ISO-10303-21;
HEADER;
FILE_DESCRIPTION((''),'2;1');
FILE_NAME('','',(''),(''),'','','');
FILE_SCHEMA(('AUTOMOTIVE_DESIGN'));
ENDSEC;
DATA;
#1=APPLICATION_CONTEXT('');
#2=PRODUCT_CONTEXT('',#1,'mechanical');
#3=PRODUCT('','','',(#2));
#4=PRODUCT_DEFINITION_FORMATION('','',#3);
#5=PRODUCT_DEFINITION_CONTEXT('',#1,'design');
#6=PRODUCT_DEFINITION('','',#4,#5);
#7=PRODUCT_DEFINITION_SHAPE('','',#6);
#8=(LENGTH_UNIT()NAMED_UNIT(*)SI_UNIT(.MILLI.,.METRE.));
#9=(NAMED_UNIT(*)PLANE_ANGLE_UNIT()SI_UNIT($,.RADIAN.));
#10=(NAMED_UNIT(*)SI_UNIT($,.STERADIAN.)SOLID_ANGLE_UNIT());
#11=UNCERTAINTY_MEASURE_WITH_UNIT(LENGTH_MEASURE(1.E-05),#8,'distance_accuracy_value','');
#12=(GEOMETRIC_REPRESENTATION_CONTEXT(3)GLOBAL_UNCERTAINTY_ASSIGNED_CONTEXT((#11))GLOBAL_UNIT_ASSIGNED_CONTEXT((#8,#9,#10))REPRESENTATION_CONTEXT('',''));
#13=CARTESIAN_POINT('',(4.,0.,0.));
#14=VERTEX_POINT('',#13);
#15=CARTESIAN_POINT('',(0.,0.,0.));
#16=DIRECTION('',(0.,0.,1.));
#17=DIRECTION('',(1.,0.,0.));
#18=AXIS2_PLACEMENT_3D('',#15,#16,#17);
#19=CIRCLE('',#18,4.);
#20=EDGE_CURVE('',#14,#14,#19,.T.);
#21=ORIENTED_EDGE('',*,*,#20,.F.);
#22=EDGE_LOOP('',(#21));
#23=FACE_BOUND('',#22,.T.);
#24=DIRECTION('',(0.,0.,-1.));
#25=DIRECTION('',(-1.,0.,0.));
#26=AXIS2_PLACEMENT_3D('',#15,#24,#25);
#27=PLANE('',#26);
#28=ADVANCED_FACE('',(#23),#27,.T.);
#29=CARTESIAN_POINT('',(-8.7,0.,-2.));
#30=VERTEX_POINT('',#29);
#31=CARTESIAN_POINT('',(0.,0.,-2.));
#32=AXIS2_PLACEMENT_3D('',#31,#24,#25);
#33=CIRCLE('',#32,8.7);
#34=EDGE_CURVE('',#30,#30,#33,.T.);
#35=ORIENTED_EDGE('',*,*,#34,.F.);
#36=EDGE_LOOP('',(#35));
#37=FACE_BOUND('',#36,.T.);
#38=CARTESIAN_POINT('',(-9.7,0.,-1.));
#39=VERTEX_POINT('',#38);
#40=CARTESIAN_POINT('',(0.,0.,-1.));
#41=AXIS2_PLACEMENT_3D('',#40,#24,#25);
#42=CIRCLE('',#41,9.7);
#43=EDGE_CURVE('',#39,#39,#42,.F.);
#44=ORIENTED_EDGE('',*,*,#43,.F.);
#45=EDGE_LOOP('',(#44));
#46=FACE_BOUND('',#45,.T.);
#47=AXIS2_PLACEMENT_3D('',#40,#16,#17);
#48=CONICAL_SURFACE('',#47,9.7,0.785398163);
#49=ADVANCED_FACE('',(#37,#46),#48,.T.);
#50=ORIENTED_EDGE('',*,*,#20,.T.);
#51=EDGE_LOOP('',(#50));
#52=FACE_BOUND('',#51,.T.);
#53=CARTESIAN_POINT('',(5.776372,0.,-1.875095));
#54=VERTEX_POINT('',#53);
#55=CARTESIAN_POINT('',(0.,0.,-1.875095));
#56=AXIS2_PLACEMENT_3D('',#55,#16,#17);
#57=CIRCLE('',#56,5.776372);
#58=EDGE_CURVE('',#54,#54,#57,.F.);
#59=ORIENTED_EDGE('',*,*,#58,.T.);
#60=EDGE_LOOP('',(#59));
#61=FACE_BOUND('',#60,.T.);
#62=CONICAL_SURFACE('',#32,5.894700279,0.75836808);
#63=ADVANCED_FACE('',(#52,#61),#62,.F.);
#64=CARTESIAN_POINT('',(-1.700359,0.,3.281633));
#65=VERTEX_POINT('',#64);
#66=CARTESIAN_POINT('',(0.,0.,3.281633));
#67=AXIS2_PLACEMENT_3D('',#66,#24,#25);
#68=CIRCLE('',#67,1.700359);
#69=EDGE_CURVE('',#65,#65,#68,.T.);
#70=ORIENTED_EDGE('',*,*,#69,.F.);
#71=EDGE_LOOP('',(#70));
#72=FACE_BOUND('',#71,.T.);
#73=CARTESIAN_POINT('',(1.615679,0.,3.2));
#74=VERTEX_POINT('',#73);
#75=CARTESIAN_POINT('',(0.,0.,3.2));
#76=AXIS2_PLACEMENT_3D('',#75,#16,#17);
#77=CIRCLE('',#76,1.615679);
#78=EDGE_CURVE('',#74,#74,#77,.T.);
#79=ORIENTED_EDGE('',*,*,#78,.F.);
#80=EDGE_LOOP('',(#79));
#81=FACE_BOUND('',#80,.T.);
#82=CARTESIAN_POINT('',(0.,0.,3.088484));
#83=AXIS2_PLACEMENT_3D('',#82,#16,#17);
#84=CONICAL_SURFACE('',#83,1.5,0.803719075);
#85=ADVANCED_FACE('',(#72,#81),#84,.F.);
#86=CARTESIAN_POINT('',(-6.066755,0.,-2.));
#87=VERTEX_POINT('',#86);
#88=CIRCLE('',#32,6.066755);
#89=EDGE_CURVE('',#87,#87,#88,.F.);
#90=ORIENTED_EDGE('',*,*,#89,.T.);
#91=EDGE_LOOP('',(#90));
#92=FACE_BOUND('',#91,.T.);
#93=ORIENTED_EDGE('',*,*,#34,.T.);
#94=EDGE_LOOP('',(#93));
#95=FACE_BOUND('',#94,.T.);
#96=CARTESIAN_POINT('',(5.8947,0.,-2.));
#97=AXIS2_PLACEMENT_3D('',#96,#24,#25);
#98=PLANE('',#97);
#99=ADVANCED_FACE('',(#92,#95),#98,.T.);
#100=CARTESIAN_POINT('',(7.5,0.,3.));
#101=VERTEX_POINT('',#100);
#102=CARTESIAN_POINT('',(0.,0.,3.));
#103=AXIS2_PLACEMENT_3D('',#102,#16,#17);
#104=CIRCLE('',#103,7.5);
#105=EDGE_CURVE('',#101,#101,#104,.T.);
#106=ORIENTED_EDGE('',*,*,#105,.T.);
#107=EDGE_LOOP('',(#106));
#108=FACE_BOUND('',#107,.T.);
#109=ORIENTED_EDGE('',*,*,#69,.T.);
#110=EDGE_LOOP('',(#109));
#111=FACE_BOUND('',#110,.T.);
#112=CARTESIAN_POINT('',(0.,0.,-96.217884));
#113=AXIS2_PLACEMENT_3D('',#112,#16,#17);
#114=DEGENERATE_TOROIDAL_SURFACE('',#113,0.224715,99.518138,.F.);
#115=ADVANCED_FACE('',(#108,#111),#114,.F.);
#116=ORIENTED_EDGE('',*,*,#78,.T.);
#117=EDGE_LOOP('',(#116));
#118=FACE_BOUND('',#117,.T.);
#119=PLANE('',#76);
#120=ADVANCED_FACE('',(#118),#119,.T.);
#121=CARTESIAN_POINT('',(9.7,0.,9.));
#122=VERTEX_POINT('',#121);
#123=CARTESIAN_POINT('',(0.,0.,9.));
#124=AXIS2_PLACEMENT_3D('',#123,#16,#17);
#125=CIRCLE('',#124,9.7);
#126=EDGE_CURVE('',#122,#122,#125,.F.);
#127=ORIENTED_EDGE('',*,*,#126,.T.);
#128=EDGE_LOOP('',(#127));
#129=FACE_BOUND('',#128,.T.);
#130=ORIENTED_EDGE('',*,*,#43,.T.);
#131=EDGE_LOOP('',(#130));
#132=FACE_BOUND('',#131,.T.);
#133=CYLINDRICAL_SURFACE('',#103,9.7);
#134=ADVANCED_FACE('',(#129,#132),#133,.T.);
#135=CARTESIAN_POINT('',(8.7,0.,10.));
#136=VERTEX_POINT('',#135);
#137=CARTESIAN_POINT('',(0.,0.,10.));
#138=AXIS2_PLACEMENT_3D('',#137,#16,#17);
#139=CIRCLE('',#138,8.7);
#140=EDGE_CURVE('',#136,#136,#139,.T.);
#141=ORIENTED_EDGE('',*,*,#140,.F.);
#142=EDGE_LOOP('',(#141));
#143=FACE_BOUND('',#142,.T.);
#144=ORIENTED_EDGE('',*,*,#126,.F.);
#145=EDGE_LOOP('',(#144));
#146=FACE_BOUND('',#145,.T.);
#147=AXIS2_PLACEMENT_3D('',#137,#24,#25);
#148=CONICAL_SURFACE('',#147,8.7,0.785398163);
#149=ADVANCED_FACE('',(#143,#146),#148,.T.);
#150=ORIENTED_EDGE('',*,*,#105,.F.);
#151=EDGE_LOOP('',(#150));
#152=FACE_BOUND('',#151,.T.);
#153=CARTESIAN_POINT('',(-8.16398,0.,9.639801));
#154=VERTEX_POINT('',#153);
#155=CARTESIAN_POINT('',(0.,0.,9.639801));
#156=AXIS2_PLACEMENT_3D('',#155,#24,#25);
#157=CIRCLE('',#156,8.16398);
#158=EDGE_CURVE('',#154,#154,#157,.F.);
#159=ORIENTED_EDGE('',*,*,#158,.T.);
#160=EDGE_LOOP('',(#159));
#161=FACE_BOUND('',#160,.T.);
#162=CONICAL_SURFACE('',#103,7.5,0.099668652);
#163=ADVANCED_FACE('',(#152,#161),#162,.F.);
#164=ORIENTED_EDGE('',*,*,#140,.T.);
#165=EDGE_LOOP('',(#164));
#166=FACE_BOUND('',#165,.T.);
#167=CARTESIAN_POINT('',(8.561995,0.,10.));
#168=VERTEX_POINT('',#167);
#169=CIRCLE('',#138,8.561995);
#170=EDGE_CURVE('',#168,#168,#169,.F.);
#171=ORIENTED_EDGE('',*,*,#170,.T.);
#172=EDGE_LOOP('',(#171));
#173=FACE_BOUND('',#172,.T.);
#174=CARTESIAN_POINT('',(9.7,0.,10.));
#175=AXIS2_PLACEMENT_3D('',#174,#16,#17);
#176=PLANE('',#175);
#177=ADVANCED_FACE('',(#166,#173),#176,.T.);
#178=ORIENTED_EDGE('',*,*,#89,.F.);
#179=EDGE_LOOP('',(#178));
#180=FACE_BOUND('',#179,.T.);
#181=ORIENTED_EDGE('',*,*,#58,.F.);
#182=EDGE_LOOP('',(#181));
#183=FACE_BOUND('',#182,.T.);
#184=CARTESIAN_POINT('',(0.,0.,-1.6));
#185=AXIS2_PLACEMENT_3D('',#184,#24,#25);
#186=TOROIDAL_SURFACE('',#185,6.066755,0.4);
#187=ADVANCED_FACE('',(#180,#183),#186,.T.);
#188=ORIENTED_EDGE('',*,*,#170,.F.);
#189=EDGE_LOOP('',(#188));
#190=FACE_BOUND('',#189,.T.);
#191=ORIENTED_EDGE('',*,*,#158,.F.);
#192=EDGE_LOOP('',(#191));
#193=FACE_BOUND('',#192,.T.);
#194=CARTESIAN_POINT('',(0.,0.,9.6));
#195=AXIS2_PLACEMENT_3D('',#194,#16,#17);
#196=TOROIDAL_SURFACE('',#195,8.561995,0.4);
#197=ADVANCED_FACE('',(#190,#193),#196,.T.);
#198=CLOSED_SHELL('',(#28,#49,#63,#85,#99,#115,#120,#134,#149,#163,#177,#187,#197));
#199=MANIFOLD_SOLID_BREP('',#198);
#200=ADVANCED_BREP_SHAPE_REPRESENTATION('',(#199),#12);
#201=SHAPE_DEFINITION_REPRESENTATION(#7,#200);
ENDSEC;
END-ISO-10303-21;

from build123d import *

# Parameters (mm, degrees)
CHAMFER_1_SIZE      = 1
FILLET_1_R          = 0.4
SKETCH_2_R          = 1.5
CUT_EXTRUDE_1_DEPTH = 6.8
CHAMFER_2_SIZE      = 0.2
CHAMFER_2_SIZE_2    = 0.196621941


with BuildPart() as part:
    # 스케치1 → 회전1 (revolve)
    with BuildSketch(Plane(origin=(0, 0, 0), x_dir=(1, 0, 0), z_dir=(0, 1, 0))):
        with BuildLine():
            Line((0, 0), (4, 0))
            Line((4, 0), (5.894700278586023, 2))
            Line((5.894700278586023, 2), (9.7, 2))
            Line((9.7, 2), (9.7, -10))
            Line((9.7, -10), (8.2, -9.999999999999998))
            Line((8.2, -9.999999999999998), (7.5, -2.999999999999999))
            ThreePointArc((7.5, -2.999999999999999), (3.75282938430565, -3.220734607641745), (0, -3.3))
            Line((0, -3.3), (0, -3))
            Line((0, -3), (0, 0))
        make_face()
    revolve(axis=Axis((0, 0, 3), (0, 0, -1)))

    # 모따기1
    chamfer_1_edges = [part.edges().sort_by_distance(p)[0] for p in [
        (-9.7, -1.19e-15, 10),
        (-9.7, -1.19e-15, -2),
    ]]
    chamfer(chamfer_1_edges, length=CHAMFER_1_SIZE)

    # 필렛1
    fillet_1_edges = [part.edges().sort_by_distance(p)[0] for p in [
        (-8.2, -1e-15, 9.999999999999998),
        (-5.894700278586023, -7.2e-16, -2),
    ]]
    fillet(fillet_1_edges, radius=FILLET_1_R)

    # 스케치2 → 컷-돌출1 (cut)
    with BuildSketch(Plane.XY.offset(10)):
        Circle(SKETCH_2_R)
    extrude(amount=-CUT_EXTRUDE_1_DEPTH, mode=Mode.SUBTRACT)

    # 모따기2
    # the kernel refuses this chamfer: 0.2, 0.196621941 mm, written as the material it takes off along each edge
    with BuildSketch(Plane(origin=(2.26883e-11, 1.9670789e-10, 3.2853073545034164), x_dir=(1.0, -1.3113829668845467e-10, 0), z_dir=(-1.3113829668845467e-10, -1.0, 0))) as chamfer_2_piece_1_section:
        with BuildLine():
            Line((1.499999999977312 + CHAMFER_2_SIZE * 0.999831893416, -CHAMFER_2_SIZE * 0.0183353458825), (1.5000000000226883, -CHAMFER_2_SIZE_2 * 1.00000000195))
            Line((1.5000000000226883, -CHAMFER_2_SIZE_2 * 1.00000000195), (1.499999999977312, 0))
            ThreePointArc((1.499999999977312, 0), (1.6028105859636501, -0.00183517420042278), (1.499999999977312 + CHAMFER_2_SIZE * 0.999831893416, -CHAMFER_2_SIZE * 0.0183353458825))
        make_face()
    chamfer_2_piece_1 = revolve(axis=Axis((2.26883e-11, 1.9670789e-10, 3.2853073545034164), (0, 0, 1)), mode=Mode.PRIVATE)
    chamfer_2_piece_1 = split(chamfer_2_piece_1, bisect_by=Plane(origin=(2.26883e-11, 1.9670789e-10, 3.2), z_dir=(0, 0, 1)), keep=Keep.TOP, mode=Mode.PRIVATE)
    add(chamfer_2_piece_1, mode=Mode.SUBTRACT)


solid = part.part
